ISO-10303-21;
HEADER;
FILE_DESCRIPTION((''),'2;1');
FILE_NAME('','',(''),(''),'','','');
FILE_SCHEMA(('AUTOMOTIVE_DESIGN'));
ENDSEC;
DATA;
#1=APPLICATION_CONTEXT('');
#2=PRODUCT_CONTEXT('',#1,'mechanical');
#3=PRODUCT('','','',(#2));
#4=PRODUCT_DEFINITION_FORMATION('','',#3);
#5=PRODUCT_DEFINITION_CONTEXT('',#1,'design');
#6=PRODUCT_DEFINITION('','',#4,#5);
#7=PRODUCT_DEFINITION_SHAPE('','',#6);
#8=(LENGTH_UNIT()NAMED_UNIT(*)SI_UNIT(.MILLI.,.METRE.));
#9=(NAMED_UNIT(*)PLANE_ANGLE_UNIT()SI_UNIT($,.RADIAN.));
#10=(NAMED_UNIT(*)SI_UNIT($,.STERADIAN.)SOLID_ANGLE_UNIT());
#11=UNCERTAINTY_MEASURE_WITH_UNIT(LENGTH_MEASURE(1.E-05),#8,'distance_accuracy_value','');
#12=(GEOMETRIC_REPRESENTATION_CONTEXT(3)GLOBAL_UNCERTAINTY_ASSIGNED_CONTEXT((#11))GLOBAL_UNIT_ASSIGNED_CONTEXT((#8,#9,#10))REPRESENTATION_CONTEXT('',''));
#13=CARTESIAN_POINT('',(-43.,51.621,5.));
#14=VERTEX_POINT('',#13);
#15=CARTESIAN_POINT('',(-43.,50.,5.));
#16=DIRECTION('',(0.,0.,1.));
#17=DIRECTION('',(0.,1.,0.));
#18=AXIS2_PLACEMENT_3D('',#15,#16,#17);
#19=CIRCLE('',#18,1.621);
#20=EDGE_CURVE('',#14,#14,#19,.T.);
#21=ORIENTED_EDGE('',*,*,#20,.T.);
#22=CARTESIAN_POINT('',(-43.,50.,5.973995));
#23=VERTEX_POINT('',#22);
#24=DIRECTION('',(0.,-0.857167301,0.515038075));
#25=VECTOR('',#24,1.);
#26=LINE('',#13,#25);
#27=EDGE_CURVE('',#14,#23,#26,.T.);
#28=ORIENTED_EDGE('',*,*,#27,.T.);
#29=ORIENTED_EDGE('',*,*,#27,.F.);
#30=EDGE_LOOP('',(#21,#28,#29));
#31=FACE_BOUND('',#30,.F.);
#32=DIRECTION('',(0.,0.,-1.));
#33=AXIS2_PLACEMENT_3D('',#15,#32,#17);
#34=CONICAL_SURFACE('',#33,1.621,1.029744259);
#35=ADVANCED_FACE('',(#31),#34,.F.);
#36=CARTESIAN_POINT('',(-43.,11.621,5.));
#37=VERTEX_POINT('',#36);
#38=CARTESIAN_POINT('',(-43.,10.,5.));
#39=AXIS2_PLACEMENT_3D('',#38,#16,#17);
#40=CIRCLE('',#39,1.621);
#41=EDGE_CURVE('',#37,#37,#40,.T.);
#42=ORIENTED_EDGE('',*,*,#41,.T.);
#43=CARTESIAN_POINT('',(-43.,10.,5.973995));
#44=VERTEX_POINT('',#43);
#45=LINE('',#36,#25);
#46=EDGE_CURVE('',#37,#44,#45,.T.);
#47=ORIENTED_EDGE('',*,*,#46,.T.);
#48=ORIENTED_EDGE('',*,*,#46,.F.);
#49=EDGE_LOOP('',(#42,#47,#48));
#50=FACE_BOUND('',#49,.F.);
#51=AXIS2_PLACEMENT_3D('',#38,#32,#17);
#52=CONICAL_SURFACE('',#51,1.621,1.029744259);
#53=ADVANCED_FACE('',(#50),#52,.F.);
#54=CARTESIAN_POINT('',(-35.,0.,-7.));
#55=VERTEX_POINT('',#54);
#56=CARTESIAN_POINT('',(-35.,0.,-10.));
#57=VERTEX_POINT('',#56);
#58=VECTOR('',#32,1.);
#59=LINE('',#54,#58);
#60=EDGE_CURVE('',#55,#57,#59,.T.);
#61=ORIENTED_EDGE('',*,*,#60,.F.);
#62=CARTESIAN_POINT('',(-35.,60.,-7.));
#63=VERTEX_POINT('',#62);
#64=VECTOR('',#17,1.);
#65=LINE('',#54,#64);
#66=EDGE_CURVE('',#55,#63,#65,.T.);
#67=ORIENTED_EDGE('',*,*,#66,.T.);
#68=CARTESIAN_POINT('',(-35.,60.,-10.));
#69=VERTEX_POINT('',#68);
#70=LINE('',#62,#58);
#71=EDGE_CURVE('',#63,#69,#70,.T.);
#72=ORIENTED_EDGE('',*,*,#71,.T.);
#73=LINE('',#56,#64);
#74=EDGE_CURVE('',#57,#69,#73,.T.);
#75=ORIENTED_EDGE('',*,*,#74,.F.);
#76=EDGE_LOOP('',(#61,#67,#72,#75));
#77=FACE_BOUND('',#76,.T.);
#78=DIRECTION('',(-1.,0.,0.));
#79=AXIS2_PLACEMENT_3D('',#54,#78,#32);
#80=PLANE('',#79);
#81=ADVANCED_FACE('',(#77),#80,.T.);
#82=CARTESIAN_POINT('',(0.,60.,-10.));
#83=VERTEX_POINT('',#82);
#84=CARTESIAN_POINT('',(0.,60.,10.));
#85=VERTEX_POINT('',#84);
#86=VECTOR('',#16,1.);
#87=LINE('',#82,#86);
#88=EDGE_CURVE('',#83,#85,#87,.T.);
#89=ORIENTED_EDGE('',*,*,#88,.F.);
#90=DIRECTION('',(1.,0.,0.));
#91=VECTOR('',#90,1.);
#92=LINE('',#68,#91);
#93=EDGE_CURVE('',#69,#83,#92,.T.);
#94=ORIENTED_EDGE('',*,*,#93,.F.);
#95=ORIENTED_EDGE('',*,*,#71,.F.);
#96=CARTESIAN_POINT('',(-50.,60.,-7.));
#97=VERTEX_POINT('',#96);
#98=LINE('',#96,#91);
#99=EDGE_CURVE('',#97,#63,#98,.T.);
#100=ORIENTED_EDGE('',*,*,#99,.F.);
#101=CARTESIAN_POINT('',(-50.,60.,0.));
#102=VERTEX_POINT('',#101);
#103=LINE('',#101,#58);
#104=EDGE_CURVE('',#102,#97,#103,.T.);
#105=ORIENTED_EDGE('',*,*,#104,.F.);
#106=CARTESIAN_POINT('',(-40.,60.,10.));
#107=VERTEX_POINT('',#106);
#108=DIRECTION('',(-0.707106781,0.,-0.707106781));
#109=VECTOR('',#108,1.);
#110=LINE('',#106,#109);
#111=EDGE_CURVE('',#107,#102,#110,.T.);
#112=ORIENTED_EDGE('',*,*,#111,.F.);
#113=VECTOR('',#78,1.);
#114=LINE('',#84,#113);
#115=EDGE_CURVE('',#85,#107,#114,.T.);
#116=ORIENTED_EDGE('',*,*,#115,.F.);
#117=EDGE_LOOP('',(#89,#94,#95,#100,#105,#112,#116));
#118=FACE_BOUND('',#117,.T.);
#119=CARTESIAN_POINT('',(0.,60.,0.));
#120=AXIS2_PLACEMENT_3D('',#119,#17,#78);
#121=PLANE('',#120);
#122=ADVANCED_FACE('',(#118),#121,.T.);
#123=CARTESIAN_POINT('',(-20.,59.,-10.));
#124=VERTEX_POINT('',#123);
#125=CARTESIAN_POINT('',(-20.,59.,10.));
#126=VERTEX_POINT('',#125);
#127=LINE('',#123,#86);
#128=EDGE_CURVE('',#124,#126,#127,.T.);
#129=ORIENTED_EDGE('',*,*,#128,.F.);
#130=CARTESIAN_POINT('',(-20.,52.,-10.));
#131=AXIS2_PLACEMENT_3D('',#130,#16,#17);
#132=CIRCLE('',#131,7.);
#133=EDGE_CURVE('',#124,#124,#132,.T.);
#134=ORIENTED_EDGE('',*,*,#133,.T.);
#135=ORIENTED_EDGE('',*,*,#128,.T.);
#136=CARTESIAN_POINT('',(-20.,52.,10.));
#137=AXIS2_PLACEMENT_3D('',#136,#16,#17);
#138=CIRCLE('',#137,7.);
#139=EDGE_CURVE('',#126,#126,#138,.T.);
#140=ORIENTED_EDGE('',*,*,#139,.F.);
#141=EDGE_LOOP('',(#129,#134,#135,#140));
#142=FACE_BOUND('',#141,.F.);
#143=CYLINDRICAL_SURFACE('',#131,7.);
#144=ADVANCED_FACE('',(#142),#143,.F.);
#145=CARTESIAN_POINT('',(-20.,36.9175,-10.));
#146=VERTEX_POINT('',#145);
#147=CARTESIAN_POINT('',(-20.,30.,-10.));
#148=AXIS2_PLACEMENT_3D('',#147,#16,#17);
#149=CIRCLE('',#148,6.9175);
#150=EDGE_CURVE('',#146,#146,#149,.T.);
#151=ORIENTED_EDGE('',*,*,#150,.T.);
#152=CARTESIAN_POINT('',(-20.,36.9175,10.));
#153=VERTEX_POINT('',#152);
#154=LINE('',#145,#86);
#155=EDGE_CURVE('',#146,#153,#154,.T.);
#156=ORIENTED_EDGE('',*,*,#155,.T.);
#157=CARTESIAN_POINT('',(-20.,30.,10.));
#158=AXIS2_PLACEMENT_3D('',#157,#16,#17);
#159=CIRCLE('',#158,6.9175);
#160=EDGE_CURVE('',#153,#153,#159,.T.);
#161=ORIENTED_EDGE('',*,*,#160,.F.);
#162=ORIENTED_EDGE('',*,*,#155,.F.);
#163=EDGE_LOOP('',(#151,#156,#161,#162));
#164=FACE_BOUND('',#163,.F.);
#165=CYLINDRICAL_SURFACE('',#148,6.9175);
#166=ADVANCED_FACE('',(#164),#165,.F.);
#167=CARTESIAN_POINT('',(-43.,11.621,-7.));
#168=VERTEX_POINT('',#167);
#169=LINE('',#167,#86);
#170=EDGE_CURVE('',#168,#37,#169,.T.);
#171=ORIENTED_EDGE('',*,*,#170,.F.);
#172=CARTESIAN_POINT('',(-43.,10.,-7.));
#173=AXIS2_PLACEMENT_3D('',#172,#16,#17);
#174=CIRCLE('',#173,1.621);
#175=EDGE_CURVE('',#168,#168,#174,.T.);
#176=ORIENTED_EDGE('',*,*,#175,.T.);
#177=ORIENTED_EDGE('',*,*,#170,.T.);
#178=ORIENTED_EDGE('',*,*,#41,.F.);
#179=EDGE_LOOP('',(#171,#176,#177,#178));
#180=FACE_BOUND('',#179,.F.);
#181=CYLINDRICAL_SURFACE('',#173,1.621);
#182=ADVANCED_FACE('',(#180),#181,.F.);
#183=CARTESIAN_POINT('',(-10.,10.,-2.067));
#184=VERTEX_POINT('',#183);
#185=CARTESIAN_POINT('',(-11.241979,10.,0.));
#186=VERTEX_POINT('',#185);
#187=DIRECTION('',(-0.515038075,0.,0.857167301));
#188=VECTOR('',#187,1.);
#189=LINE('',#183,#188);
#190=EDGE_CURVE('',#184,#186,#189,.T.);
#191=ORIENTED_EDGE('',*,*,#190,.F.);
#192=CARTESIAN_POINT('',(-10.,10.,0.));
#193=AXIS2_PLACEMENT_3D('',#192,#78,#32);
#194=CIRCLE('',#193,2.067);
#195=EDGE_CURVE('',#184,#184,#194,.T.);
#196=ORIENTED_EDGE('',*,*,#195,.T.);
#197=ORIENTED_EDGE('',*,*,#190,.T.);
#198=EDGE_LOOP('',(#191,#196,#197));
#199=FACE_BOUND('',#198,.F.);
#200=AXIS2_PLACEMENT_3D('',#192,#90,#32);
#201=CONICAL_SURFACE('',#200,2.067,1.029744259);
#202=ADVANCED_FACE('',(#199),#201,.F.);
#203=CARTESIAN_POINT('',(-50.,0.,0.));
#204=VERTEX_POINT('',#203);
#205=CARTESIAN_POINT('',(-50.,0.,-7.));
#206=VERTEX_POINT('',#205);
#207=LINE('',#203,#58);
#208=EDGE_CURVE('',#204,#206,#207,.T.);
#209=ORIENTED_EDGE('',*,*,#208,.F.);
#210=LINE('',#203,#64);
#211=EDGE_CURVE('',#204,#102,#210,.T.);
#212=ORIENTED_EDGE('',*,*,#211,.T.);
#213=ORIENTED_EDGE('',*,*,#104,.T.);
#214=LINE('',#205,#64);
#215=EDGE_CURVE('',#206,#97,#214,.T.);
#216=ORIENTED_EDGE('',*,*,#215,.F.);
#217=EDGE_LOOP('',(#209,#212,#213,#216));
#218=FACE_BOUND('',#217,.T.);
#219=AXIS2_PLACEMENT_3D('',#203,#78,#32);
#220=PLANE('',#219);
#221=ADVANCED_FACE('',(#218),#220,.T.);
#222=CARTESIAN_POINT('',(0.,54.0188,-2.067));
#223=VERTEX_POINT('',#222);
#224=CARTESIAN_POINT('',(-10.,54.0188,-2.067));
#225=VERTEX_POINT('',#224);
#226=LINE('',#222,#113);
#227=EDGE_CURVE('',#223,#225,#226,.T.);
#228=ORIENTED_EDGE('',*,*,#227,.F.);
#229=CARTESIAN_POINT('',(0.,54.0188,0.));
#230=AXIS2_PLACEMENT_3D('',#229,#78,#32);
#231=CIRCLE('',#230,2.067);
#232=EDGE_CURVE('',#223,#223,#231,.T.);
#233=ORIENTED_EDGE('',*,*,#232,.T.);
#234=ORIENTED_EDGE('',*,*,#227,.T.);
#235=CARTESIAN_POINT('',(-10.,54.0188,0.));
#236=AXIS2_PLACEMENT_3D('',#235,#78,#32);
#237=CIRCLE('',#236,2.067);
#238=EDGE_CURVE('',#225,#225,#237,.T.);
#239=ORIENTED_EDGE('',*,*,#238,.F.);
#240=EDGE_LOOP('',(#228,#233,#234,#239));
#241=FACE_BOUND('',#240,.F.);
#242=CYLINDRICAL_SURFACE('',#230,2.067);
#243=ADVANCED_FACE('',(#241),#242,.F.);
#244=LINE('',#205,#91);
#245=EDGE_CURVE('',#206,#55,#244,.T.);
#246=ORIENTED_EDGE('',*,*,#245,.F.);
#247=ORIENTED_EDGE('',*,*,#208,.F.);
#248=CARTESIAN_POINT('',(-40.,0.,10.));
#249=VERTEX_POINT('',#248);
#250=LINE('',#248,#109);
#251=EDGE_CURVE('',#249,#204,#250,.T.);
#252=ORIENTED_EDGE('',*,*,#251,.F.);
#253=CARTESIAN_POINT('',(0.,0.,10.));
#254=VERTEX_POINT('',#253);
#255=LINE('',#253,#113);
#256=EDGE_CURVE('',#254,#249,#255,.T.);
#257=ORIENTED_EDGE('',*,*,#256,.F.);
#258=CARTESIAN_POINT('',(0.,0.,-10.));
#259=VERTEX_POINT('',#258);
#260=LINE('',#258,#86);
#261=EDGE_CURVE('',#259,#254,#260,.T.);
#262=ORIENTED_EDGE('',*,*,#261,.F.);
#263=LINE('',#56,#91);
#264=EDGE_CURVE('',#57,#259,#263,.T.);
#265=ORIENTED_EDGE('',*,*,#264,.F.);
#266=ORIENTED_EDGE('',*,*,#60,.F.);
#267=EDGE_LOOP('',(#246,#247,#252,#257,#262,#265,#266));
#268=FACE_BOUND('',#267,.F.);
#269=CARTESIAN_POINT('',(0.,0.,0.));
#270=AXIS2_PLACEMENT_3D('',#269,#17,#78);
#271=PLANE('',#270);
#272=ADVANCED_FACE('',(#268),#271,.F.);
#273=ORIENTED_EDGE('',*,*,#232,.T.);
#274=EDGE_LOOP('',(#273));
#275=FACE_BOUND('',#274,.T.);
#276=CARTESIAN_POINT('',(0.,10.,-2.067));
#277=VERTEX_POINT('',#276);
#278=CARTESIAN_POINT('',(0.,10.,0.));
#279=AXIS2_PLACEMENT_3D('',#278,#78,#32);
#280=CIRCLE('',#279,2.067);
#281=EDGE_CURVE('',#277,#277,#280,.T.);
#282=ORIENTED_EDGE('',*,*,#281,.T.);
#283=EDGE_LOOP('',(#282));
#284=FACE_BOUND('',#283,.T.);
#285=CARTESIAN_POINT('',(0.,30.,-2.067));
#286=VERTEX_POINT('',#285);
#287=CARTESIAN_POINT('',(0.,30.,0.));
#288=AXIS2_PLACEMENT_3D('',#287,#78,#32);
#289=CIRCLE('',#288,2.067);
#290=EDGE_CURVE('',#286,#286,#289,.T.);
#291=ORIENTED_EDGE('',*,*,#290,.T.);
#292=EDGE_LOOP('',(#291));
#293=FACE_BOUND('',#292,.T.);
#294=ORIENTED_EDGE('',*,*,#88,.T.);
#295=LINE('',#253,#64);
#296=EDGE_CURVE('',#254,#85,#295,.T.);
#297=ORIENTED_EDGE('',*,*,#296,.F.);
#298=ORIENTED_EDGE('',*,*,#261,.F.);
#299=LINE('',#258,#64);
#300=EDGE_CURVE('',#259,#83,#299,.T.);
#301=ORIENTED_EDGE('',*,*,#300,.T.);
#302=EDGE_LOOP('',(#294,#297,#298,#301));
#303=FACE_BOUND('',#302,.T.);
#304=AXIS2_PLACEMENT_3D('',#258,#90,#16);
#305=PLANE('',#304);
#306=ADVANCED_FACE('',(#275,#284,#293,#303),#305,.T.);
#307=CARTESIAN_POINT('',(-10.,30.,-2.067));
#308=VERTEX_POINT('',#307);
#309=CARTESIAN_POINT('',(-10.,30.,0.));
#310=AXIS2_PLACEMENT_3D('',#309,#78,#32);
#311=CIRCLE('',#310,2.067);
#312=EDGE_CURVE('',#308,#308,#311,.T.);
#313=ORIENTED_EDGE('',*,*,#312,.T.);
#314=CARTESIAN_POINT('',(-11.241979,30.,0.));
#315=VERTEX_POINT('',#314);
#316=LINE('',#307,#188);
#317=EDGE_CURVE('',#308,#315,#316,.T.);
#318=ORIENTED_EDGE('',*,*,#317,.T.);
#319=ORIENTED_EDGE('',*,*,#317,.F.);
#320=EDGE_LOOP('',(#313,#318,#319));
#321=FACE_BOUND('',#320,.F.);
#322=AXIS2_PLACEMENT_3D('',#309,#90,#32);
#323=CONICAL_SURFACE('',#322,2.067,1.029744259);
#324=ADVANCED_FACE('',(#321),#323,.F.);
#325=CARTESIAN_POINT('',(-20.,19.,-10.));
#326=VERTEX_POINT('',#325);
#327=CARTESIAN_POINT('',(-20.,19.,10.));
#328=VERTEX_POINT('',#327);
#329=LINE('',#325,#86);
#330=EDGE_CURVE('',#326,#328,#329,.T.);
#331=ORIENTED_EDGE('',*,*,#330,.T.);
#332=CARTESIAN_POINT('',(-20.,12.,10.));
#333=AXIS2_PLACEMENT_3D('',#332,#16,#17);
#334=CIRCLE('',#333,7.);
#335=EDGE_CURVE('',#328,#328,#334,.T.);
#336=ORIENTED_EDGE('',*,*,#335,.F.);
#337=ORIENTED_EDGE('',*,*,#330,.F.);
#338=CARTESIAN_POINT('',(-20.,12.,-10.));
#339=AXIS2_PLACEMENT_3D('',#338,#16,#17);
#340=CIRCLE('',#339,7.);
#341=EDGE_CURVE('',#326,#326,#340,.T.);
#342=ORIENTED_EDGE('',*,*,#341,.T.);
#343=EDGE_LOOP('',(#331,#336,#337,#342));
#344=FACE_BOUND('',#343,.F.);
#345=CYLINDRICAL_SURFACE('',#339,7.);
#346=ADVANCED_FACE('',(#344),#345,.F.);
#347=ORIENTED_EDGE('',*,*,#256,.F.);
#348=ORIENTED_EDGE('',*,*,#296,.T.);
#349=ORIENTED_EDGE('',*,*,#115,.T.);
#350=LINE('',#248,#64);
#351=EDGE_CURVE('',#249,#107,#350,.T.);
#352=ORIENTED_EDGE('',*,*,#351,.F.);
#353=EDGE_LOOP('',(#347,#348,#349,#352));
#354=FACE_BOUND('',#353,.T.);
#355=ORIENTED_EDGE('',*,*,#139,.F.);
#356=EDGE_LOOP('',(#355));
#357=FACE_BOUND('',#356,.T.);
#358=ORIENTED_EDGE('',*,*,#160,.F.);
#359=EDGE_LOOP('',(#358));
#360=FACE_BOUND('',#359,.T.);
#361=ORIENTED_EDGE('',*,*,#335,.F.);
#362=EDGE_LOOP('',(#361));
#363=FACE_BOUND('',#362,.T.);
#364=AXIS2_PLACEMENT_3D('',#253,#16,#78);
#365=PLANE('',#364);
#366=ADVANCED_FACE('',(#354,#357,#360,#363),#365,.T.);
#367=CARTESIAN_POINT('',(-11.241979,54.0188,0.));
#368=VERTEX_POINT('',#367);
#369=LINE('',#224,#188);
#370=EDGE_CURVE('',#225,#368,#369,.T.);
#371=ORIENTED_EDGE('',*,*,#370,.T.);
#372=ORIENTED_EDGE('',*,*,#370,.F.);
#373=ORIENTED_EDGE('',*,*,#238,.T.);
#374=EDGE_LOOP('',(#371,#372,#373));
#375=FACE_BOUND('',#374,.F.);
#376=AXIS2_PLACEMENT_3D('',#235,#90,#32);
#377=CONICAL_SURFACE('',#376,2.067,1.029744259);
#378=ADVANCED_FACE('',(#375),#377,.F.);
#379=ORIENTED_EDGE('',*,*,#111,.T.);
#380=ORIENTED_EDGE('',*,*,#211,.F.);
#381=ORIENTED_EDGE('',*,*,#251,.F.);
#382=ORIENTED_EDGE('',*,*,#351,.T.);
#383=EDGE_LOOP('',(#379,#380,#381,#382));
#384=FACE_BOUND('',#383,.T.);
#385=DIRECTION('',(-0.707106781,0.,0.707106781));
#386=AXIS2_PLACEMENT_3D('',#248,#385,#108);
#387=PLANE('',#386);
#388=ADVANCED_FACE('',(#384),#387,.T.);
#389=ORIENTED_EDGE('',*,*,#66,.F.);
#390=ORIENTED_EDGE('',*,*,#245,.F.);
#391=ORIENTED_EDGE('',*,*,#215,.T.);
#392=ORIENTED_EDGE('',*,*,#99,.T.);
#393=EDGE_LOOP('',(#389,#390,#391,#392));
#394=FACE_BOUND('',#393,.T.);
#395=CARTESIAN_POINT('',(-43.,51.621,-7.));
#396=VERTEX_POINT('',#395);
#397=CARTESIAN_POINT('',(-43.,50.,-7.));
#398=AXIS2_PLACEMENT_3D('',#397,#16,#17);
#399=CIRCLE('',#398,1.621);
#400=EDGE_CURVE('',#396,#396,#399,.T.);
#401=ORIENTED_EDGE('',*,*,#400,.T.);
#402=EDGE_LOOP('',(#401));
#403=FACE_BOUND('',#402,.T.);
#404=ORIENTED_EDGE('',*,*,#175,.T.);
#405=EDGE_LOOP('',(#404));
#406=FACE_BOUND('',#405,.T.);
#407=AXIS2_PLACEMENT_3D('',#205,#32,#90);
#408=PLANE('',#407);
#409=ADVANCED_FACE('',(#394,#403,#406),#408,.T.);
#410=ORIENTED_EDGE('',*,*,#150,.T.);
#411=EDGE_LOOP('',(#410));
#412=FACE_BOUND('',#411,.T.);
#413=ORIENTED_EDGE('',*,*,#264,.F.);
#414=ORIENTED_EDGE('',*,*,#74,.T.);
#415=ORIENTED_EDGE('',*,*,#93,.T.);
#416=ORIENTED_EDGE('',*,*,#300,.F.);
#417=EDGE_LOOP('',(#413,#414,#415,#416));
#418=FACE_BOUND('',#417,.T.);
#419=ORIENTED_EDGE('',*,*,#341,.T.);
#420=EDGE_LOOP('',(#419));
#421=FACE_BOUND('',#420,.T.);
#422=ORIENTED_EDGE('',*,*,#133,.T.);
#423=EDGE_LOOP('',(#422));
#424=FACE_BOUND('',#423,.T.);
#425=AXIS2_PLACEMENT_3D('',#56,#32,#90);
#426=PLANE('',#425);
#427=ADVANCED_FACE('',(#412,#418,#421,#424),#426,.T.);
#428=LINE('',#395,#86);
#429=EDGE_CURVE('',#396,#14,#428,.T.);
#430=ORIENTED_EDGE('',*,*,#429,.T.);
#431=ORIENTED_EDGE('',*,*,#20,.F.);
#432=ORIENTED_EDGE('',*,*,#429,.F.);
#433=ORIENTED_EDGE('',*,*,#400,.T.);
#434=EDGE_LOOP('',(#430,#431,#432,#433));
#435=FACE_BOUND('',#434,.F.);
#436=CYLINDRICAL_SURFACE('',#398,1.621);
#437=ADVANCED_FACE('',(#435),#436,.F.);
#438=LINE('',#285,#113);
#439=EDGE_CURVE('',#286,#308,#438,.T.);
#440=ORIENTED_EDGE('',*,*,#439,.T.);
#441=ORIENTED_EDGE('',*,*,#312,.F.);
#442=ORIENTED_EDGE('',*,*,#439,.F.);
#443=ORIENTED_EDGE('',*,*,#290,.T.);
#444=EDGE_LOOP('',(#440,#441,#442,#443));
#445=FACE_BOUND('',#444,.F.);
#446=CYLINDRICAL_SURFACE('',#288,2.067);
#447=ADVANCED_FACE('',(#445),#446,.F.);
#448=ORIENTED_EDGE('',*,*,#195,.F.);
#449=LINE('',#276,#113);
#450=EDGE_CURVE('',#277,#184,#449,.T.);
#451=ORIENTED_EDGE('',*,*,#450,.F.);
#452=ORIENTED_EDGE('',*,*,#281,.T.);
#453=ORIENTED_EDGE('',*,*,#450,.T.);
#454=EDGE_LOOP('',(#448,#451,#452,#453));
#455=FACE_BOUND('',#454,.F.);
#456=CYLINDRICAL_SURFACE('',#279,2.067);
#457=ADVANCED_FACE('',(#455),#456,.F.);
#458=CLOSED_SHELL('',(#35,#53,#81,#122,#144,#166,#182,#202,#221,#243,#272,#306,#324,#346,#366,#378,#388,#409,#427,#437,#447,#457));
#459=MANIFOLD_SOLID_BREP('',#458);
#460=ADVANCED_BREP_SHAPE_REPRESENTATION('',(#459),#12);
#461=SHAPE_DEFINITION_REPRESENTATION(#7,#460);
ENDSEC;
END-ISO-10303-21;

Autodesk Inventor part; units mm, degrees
ref_plane "YZ Plane" through (0, 0, 0) normal (1, 0, 0) x (0, 1, 0)
ref_plane "XZ Plane" through (0, 0, 0) normal (0, 1, 0) x (-1, 0, 0)
ref_plane "XY Plane" through (0, 0, 0) normal (0, 0, 1) x (1, 0, 0)
sketch "Skizze1" plane through (0, 0, 0) normal (0, 1, 0) x (-1, 0, 0)
  line L0 (0, -10) -> (0, 10)
  line L1 (0, 10) -> (40, 10)
  line L2 (40, 10) -> (50, 0)
  line L3 (50, 0) -> (50, -7)
  line L4 (50, -7) -> (35, -7)
  line L5 (35, -7) -> (35, -10)
  line L6 (35, -10) -> (0, -10)
  line L7 (0, 0) -> (85.3703, 0) construction
  dimension "d0" = 10
  dimension "d1" = 10
  dimension "d2" = 3
  dimension "d3" = 20
  dimension "d4" = 40
  dimension "d5" = 15
extrude "Extrusion1" add sketch "Skizze1" along normal blind 60
sketch "Skizze2" plane through (-35, 0, -7) normal (0, 0, -1) x (-1, 0, 0)
  line L0 (15, 0) -> (15, 60) projected
  line L1 (15, 30) -> (5.3736, 30) construction
  line L2 (0, 60) -> (15, 60) projected
  point P0 (-35, 0)
  point P1 (8, 10)
  point P2 (8, 50)
  dimension "d8" = 7
  dimension "d9" = 7
  dimension "d10" = 40
  dimension "d11" = 10
hole "Bohrung1" at (-43, 10, -7) at (-43, 50, -7) direction (0, 0, 1) diameter 3.242 depth 12 tip angle 118 thread size "M4x0.7" class "6H" standard "ISO Metric profile"
sketch "Skizze3" plane through (0, 0, -10) normal (0, 0, -1) x (-1, 0, 0)
  line L0 (0, 0) -> (0, 60) projected
  line L1 (0, 0) -> (35, 0) projected
  point P0 (20, 52)
  point P1 (20, 30)
  point P2 (20, 12)
  point P3 (0, 30)
  dimension "d19" = 20
  dimension "d20" = 12
  dimension "d21" = 40
hole "Bohrung2" at (-20, 12, -10) at (-20, 52, -10) direction (0, 0, 1) diameter 14 depth 20
hole "Bohrung3" at (-20, 30, -10) direction (0, 0, 1) diameter 13.835 depth 20 thread size "M16x2" class "6H" standard "ISO Metric profile"
sketch "Skizze6" plane through (0, 0, 10) normal (1, 0, 0) x (0, 0, -1)
  line L0 (0, 60) -> (20, 60) projected
  point P0 (10, 0)
  point P1 (10, 54.0188)
  point P2 (10, 60)
hole "Bohrung4" at (0, 54.0188, 0) direction (-1, 0, 0) diameter 4.134 depth 10 tip angle 118 thread size "M5x0.8" class "6H" standard "ISO Metric profile"
sketch "Skizze7" plane through (0, 0, 10) normal (1, 0, 0) x (0, 0, -1)
  line L0 (0, 0) -> (20, 0) projected
  point P0 (10, 0)
  point P1 (10, 10)
  point P2 (10, 0)
  point P3 (10, 0)
  dimension "d51" = 10
hole "Bohrung5" at (0, 10, 0) direction (-1, 0, 0) diameter 4.134 depth 10 tip angle 118 thread size "M5x0.8" class "6H" standard "ISO Metric profile"
sketch "Skizze8" plane through (0, 0, 10) normal (1, 0, 0) x (0, 0, -1)
  line L0 (0, 0) -> (20, 0) projected
  point P0 (10, 0)
  point P1 (10, 30)
  point P2 (10, 0)
  point P3 (10, 0)
  point P4 (10, 0)
  dimension "d59" = 30
hole "Bohrung6" at (0, 30, 0) direction (-1, 0, 0) diameter 4.134 depth 10 tip angle 118 thread size "M5x0.8" class "6H" standard "ISO Metric profile"
properties part number "spannbakce"
